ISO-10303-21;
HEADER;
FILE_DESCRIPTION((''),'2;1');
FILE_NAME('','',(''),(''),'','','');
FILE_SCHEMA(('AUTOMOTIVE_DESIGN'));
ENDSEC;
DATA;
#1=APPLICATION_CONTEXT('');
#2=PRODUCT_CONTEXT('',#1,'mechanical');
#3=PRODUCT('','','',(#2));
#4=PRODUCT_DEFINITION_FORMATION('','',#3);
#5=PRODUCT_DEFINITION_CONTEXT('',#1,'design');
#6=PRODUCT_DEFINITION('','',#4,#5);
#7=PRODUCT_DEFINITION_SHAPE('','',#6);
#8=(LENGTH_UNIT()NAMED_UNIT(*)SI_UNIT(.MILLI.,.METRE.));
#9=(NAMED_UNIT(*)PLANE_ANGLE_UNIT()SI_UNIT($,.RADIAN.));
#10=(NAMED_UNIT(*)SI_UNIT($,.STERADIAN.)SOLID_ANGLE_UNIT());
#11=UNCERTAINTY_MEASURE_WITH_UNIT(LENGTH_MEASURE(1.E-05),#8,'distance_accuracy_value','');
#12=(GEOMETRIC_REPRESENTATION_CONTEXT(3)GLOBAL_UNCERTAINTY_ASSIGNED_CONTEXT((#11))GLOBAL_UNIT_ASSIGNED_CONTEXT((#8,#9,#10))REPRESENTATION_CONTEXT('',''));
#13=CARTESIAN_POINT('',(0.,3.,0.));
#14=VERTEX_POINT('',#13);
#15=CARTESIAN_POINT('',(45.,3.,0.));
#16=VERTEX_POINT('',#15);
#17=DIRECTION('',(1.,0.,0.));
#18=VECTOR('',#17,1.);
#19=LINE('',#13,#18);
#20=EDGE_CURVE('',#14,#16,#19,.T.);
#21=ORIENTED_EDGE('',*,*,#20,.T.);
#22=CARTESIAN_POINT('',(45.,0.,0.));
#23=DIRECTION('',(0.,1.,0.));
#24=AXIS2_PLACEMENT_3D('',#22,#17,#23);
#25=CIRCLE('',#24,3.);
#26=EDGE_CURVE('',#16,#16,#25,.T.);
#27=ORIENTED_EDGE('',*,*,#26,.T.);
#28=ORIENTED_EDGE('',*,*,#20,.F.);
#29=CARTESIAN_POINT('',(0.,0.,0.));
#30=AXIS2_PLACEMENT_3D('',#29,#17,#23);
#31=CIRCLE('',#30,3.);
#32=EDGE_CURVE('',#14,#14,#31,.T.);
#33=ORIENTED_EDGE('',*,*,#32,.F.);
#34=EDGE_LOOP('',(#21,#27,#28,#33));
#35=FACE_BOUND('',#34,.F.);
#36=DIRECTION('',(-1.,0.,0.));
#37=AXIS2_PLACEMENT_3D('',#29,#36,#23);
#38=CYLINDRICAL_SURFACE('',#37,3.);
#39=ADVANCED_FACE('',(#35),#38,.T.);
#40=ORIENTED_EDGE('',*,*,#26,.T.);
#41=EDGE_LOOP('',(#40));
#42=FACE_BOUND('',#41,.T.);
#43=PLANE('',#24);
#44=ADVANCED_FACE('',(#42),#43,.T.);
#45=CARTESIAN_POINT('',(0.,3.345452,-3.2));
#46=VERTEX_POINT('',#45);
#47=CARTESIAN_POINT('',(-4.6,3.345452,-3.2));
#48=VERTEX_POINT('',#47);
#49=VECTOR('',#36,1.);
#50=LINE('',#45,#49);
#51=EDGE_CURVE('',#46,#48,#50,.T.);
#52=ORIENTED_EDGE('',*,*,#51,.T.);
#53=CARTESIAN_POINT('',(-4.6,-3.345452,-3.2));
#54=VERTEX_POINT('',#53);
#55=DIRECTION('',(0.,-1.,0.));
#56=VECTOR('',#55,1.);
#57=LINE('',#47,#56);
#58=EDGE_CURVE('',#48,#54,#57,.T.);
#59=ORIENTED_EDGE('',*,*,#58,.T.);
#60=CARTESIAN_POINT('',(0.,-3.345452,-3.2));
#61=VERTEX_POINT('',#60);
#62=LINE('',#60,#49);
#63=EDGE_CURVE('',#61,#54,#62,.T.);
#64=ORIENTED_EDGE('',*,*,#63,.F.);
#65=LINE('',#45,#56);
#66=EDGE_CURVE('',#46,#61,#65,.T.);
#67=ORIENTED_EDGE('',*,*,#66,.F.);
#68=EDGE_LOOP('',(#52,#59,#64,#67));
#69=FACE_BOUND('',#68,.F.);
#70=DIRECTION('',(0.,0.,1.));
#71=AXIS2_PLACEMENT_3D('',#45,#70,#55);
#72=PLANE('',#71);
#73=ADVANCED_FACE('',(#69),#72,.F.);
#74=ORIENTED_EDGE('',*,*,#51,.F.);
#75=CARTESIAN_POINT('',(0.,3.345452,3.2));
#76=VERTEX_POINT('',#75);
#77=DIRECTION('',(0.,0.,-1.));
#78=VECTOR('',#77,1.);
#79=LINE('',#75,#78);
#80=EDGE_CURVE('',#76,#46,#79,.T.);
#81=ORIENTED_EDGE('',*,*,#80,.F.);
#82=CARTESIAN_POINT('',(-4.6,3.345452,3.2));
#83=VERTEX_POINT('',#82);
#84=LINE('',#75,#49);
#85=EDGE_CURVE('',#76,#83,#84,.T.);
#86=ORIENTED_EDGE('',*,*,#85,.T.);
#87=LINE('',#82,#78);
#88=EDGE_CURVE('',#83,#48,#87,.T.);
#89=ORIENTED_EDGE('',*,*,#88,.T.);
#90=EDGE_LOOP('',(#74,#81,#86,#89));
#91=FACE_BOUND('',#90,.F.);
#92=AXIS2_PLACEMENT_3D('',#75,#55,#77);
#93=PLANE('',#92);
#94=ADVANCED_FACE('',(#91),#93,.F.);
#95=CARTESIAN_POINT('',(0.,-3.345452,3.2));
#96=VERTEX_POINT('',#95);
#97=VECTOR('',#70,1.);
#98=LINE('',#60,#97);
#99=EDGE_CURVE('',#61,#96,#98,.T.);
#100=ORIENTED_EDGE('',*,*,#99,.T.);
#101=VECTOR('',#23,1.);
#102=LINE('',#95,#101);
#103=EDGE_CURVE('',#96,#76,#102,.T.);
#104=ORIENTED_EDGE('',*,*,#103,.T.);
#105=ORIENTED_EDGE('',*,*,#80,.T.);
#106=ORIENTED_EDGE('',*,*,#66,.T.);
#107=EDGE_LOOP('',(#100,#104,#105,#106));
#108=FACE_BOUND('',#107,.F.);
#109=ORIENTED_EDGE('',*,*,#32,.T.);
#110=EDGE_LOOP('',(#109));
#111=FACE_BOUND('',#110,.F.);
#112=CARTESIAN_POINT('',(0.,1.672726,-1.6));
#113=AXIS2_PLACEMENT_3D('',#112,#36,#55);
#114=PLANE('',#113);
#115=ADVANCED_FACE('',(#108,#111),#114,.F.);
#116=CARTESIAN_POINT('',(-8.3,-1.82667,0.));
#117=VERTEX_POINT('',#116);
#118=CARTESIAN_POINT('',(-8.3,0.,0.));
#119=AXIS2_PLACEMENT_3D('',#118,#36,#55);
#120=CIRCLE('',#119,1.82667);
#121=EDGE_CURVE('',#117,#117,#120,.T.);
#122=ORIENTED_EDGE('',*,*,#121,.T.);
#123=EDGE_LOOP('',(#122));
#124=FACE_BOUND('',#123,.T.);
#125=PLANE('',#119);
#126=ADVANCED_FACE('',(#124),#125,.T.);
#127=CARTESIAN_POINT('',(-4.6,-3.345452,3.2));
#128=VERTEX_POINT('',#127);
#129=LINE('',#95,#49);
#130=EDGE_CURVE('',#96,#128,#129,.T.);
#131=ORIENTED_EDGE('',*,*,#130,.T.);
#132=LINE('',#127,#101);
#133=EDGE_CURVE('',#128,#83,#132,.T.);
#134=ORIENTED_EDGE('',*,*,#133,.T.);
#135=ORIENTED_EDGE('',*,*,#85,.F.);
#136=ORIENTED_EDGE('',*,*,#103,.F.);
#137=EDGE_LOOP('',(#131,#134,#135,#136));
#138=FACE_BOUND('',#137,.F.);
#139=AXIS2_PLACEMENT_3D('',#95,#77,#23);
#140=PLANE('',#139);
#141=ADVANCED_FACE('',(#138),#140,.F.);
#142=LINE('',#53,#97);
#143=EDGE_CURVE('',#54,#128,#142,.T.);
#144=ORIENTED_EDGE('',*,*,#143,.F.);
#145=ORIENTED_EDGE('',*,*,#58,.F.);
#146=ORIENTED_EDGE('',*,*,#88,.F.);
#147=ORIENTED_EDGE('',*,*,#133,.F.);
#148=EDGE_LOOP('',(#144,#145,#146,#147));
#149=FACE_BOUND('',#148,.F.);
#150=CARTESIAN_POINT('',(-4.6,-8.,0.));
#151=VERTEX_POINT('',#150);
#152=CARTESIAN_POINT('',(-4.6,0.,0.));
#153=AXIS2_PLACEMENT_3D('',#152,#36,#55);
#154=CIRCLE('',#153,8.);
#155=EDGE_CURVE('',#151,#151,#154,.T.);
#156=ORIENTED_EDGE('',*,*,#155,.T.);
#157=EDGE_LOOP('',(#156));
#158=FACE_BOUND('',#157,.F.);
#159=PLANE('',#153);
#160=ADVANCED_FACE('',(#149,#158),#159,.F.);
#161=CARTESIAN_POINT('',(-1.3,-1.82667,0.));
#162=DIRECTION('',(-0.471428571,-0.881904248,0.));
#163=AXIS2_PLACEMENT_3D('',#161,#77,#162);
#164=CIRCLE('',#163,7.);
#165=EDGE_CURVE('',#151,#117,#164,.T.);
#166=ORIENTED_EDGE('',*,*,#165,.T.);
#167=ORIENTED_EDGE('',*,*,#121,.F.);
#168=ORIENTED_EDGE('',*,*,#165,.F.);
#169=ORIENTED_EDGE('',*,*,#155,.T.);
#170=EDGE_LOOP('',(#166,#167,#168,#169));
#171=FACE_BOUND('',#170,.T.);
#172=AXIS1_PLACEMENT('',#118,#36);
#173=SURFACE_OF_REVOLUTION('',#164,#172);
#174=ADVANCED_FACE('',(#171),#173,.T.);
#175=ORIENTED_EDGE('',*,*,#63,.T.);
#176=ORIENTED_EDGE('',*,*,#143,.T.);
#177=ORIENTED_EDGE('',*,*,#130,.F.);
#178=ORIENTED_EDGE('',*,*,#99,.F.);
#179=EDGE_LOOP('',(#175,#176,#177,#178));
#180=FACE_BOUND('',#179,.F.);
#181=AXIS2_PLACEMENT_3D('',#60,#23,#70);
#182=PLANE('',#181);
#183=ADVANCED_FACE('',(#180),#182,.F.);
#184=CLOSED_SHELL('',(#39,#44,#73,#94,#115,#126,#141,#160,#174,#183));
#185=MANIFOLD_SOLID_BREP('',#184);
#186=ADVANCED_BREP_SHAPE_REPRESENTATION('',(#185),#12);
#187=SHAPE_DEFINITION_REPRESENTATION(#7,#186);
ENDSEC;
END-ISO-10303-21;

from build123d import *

# Parameters (mm, degrees)
F0_R     = 3
F1_DEPTH = 45
F2_W     = 3.3454523287
F2_H     = 3.2
F3_DEPTH = 4.6
F4_R     = 8
F5_DEPTH = 3.7


# Not quite as in the source:
# - a fillet or chamfer that OpenCascade refuses, or shapes differently, is made with other operations: its cross-section is extruded or revolved along the edge and cut away or added


with BuildPart() as f1:
    # F0 (on Right) → F1 (new body)
    with BuildSketch(Plane.YZ):
        Circle(F0_R)
    extrude(amount=F1_DEPTH)

    # F2 (on face) → F3 (join)
    with BuildSketch(Plane(origin=(0, 0, 0), x_dir=(0, -1, 0), z_dir=(-1, 0, 0))):
        with Locations((-1.6727261643, -1.6)):
            Rectangle(F2_W, F2_H)
        with Locations((-1.6727261643, 1.6)):
            Rectangle(F2_W, F2_H)
        Polygon((0, 3.2), (0, 0), (0, -3.2), (3.3454523287, -3.2), (3.3454523287, 0), (3.3454523287, 3.2), align=None)
    extrude(amount=F3_DEPTH)

    # F4 (on face) → F5 (join)
    with BuildSketch(Plane(origin=(-4.6, 0, 0), x_dir=(0, -1, 0), z_dir=(-1, 0, 0))):
        Circle(F4_R)
    extrude(amount=F5_DEPTH)

    # F6: fillet of radius 7 on 1 edges, made by hand

    # F6_s1 → F6_t2 (revolve, cut)
    with BuildSketch(Plane.XY):
        with BuildLine():
            ThreePointArc((-4.6, -8), (-7.3041652209, -5.4252811095), (-8.3, -1.8266702664))
            Line((-8.3, -1.8266702664), (-8.3, -8))
            Line((-8.3, -8), (-4.6, -8))
        make_face()
    revolve(axis=Axis((-8.3, 0, 0), (-1, 0, 0)), mode=Mode.SUBTRACT)


solid = f1.part
